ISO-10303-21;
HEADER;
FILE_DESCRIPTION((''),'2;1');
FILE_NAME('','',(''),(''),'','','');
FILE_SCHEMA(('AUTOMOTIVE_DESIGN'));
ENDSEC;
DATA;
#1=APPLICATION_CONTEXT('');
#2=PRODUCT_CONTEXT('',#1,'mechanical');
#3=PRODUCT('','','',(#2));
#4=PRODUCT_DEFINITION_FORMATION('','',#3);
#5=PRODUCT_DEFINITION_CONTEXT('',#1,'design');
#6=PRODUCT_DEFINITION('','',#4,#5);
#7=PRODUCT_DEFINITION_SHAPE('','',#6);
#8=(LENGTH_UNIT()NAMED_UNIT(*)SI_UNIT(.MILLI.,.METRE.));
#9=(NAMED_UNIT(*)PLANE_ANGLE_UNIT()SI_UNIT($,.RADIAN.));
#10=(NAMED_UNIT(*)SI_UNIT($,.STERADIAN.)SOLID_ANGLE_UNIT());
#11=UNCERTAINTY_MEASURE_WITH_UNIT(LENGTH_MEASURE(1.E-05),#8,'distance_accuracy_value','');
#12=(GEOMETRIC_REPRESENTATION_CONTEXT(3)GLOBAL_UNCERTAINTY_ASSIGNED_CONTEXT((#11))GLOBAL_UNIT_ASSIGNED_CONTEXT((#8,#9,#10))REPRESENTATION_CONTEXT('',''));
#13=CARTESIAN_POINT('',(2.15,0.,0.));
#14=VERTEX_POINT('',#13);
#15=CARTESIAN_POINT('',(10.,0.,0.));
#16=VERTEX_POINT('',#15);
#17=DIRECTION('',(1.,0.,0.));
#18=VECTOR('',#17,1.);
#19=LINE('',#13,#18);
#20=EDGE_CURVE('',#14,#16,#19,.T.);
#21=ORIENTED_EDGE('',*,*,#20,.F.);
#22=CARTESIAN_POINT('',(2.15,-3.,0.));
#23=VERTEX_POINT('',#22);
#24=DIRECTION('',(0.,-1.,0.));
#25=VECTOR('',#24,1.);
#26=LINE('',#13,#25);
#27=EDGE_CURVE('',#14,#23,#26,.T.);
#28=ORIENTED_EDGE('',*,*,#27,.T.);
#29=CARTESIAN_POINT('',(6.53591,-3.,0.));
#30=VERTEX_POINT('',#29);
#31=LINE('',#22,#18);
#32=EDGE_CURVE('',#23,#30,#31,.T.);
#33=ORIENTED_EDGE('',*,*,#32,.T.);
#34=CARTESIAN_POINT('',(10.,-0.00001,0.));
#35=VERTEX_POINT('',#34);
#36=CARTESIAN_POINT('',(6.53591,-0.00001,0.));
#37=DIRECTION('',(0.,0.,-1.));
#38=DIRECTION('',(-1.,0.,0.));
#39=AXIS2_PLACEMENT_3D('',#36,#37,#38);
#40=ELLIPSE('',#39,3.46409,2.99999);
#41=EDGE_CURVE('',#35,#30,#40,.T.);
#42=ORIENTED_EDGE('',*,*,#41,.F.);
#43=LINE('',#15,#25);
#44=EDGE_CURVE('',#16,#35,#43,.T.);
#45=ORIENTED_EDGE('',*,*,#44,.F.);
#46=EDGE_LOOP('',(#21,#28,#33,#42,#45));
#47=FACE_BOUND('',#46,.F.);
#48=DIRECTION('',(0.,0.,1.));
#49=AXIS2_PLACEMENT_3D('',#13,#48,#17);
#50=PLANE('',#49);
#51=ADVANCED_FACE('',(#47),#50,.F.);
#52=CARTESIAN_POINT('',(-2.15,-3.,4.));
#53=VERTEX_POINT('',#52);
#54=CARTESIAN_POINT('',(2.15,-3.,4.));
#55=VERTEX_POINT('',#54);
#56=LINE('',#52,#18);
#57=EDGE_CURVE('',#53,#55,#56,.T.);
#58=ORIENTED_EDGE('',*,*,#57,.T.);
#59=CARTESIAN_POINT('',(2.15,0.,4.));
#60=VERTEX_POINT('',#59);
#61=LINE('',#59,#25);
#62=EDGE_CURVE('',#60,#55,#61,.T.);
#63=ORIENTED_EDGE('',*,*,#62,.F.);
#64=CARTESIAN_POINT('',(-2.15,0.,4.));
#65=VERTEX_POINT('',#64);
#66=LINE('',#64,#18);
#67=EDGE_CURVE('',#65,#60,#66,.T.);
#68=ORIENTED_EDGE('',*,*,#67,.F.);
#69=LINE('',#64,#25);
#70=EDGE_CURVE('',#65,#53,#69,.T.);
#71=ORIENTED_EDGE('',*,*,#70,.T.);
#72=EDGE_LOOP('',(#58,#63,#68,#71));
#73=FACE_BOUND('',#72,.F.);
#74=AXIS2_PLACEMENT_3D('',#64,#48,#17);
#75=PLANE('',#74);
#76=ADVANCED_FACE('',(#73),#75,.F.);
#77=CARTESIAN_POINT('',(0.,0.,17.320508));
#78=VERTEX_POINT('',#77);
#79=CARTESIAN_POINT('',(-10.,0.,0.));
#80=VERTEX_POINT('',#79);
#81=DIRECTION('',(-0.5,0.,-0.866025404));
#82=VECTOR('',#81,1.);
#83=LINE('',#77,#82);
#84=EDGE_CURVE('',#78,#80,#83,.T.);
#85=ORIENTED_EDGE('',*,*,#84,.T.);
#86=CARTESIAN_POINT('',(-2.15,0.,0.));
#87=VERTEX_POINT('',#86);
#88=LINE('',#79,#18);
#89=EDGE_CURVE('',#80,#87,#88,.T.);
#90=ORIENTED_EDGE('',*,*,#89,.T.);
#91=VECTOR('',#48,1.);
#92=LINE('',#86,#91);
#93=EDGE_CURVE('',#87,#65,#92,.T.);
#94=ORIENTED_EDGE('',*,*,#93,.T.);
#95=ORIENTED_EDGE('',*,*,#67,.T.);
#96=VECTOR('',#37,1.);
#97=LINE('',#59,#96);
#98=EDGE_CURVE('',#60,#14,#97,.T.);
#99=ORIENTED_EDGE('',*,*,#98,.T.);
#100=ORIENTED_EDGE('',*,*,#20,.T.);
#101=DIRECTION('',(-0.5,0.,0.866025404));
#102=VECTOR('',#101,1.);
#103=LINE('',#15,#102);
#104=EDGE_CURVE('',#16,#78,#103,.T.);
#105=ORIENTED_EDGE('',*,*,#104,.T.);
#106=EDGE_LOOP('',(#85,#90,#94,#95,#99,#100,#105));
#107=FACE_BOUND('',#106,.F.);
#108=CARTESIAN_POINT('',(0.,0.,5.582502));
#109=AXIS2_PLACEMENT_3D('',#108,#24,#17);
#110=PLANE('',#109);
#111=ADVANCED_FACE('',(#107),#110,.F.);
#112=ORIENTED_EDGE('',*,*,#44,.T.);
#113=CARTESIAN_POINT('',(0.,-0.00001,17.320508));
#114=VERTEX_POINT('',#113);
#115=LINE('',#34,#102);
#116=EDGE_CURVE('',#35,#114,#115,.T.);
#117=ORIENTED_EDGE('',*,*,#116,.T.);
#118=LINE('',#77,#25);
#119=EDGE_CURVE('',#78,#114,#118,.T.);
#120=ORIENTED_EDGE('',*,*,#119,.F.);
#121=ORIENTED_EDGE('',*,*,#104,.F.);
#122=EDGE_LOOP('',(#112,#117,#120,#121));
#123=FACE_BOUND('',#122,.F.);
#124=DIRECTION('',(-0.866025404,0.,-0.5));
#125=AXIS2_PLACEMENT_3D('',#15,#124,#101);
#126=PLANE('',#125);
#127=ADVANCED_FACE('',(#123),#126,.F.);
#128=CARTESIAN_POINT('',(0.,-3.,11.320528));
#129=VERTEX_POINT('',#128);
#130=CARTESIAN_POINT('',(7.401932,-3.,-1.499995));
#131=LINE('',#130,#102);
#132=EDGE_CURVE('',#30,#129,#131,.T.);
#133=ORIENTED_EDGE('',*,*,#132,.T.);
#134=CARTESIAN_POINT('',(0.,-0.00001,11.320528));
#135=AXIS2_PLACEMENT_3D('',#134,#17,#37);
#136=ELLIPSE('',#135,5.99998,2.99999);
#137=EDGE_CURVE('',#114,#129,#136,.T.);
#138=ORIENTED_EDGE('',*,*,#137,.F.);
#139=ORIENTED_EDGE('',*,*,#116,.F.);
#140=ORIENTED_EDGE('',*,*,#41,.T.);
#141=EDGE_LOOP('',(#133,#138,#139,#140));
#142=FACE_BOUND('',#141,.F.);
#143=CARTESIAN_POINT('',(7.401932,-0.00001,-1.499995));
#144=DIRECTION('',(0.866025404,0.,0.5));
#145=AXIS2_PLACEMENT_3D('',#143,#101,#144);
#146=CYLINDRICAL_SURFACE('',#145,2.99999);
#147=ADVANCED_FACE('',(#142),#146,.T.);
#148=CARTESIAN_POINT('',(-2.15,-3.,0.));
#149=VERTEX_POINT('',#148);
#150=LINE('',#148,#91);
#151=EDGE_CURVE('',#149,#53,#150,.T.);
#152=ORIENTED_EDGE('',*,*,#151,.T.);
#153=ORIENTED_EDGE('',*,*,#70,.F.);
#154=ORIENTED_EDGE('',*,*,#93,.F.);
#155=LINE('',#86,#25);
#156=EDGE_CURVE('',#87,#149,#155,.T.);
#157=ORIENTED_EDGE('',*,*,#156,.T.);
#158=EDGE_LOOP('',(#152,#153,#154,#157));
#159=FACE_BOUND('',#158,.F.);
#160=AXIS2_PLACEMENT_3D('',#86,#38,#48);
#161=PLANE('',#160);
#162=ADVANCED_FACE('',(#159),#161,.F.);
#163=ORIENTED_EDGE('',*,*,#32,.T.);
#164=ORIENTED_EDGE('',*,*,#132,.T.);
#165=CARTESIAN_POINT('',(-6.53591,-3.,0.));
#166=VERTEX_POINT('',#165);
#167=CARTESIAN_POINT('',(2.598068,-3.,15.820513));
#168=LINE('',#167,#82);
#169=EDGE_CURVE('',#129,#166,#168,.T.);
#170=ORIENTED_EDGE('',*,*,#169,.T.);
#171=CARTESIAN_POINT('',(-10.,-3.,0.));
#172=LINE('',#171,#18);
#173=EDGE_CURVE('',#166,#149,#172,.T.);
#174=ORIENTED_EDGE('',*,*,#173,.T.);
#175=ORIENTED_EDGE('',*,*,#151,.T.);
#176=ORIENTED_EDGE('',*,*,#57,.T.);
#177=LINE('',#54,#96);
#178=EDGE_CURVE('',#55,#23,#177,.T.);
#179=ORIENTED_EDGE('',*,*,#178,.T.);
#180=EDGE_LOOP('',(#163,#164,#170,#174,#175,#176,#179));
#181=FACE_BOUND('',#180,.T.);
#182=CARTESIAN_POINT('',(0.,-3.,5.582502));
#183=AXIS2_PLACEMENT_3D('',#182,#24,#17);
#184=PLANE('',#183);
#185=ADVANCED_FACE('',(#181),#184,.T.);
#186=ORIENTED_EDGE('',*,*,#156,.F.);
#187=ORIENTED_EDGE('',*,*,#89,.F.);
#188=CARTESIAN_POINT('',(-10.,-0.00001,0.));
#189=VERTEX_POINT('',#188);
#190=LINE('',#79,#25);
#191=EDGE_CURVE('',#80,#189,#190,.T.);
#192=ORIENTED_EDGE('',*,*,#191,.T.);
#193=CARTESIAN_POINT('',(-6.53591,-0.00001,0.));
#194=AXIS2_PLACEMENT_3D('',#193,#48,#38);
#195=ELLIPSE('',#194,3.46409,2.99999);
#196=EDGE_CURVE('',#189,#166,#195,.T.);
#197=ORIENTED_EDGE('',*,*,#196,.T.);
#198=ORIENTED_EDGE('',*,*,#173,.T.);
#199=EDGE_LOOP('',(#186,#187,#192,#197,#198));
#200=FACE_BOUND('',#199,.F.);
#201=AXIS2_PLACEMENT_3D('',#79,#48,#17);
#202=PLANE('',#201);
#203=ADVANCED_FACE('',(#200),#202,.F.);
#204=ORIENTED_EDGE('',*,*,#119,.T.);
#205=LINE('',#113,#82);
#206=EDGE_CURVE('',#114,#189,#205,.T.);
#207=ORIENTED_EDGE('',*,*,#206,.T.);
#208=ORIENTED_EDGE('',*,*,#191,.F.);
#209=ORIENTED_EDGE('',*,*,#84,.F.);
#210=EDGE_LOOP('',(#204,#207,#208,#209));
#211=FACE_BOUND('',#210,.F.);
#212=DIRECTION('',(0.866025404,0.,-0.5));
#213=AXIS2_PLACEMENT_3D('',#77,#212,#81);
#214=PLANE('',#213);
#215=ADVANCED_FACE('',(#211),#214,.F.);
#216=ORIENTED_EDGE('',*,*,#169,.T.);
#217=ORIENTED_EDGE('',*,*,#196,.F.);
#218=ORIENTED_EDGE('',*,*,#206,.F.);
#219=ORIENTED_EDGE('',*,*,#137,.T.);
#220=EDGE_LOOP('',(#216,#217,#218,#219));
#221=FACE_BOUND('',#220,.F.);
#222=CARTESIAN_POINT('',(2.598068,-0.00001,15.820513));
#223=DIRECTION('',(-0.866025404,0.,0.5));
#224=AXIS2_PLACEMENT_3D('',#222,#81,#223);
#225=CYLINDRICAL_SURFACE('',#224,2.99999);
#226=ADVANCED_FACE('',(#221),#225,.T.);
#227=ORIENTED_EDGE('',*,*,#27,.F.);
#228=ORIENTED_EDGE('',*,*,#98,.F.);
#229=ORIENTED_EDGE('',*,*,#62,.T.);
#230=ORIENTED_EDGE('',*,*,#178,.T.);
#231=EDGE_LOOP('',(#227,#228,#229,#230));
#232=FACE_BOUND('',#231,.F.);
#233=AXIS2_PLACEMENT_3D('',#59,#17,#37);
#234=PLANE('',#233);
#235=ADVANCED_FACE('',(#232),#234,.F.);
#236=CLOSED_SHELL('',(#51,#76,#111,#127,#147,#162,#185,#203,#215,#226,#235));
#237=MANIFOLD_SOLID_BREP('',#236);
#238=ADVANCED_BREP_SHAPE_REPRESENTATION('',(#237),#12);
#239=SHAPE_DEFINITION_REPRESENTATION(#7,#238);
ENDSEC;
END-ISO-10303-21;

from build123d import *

# Parameters (mm, degrees)
F1_DEPTH = 3
F2_R     = 2.99999


# Not quite as in the source:
# - a fillet or chamfer is up to 0.001 mm smaller than in the source, because OpenCascade refuses the exact size


with BuildPart() as f1:
    # F0 (on Front) → F1 (new body)
    with BuildSketch(Plane.XZ):
        Polygon((0, 17.3205080757), (-10, 0), (-2.15, 0), (-2.15, 4), (2.15, 4), (2.15, 0), (10, 0), align=None)
    extrude(amount=F1_DEPTH)

    # F2 (radius 3 in the source; OpenCascade refuses exactly that, so slightly less here)
    f2_edges = [f1.edges().sort_by_distance(p)[0] for p in [
        (-5, -3, 8.660254),
        (5, -3, 8.660254),
    ]]
    fillet(f2_edges, radius=F2_R)


solid = f1.part
